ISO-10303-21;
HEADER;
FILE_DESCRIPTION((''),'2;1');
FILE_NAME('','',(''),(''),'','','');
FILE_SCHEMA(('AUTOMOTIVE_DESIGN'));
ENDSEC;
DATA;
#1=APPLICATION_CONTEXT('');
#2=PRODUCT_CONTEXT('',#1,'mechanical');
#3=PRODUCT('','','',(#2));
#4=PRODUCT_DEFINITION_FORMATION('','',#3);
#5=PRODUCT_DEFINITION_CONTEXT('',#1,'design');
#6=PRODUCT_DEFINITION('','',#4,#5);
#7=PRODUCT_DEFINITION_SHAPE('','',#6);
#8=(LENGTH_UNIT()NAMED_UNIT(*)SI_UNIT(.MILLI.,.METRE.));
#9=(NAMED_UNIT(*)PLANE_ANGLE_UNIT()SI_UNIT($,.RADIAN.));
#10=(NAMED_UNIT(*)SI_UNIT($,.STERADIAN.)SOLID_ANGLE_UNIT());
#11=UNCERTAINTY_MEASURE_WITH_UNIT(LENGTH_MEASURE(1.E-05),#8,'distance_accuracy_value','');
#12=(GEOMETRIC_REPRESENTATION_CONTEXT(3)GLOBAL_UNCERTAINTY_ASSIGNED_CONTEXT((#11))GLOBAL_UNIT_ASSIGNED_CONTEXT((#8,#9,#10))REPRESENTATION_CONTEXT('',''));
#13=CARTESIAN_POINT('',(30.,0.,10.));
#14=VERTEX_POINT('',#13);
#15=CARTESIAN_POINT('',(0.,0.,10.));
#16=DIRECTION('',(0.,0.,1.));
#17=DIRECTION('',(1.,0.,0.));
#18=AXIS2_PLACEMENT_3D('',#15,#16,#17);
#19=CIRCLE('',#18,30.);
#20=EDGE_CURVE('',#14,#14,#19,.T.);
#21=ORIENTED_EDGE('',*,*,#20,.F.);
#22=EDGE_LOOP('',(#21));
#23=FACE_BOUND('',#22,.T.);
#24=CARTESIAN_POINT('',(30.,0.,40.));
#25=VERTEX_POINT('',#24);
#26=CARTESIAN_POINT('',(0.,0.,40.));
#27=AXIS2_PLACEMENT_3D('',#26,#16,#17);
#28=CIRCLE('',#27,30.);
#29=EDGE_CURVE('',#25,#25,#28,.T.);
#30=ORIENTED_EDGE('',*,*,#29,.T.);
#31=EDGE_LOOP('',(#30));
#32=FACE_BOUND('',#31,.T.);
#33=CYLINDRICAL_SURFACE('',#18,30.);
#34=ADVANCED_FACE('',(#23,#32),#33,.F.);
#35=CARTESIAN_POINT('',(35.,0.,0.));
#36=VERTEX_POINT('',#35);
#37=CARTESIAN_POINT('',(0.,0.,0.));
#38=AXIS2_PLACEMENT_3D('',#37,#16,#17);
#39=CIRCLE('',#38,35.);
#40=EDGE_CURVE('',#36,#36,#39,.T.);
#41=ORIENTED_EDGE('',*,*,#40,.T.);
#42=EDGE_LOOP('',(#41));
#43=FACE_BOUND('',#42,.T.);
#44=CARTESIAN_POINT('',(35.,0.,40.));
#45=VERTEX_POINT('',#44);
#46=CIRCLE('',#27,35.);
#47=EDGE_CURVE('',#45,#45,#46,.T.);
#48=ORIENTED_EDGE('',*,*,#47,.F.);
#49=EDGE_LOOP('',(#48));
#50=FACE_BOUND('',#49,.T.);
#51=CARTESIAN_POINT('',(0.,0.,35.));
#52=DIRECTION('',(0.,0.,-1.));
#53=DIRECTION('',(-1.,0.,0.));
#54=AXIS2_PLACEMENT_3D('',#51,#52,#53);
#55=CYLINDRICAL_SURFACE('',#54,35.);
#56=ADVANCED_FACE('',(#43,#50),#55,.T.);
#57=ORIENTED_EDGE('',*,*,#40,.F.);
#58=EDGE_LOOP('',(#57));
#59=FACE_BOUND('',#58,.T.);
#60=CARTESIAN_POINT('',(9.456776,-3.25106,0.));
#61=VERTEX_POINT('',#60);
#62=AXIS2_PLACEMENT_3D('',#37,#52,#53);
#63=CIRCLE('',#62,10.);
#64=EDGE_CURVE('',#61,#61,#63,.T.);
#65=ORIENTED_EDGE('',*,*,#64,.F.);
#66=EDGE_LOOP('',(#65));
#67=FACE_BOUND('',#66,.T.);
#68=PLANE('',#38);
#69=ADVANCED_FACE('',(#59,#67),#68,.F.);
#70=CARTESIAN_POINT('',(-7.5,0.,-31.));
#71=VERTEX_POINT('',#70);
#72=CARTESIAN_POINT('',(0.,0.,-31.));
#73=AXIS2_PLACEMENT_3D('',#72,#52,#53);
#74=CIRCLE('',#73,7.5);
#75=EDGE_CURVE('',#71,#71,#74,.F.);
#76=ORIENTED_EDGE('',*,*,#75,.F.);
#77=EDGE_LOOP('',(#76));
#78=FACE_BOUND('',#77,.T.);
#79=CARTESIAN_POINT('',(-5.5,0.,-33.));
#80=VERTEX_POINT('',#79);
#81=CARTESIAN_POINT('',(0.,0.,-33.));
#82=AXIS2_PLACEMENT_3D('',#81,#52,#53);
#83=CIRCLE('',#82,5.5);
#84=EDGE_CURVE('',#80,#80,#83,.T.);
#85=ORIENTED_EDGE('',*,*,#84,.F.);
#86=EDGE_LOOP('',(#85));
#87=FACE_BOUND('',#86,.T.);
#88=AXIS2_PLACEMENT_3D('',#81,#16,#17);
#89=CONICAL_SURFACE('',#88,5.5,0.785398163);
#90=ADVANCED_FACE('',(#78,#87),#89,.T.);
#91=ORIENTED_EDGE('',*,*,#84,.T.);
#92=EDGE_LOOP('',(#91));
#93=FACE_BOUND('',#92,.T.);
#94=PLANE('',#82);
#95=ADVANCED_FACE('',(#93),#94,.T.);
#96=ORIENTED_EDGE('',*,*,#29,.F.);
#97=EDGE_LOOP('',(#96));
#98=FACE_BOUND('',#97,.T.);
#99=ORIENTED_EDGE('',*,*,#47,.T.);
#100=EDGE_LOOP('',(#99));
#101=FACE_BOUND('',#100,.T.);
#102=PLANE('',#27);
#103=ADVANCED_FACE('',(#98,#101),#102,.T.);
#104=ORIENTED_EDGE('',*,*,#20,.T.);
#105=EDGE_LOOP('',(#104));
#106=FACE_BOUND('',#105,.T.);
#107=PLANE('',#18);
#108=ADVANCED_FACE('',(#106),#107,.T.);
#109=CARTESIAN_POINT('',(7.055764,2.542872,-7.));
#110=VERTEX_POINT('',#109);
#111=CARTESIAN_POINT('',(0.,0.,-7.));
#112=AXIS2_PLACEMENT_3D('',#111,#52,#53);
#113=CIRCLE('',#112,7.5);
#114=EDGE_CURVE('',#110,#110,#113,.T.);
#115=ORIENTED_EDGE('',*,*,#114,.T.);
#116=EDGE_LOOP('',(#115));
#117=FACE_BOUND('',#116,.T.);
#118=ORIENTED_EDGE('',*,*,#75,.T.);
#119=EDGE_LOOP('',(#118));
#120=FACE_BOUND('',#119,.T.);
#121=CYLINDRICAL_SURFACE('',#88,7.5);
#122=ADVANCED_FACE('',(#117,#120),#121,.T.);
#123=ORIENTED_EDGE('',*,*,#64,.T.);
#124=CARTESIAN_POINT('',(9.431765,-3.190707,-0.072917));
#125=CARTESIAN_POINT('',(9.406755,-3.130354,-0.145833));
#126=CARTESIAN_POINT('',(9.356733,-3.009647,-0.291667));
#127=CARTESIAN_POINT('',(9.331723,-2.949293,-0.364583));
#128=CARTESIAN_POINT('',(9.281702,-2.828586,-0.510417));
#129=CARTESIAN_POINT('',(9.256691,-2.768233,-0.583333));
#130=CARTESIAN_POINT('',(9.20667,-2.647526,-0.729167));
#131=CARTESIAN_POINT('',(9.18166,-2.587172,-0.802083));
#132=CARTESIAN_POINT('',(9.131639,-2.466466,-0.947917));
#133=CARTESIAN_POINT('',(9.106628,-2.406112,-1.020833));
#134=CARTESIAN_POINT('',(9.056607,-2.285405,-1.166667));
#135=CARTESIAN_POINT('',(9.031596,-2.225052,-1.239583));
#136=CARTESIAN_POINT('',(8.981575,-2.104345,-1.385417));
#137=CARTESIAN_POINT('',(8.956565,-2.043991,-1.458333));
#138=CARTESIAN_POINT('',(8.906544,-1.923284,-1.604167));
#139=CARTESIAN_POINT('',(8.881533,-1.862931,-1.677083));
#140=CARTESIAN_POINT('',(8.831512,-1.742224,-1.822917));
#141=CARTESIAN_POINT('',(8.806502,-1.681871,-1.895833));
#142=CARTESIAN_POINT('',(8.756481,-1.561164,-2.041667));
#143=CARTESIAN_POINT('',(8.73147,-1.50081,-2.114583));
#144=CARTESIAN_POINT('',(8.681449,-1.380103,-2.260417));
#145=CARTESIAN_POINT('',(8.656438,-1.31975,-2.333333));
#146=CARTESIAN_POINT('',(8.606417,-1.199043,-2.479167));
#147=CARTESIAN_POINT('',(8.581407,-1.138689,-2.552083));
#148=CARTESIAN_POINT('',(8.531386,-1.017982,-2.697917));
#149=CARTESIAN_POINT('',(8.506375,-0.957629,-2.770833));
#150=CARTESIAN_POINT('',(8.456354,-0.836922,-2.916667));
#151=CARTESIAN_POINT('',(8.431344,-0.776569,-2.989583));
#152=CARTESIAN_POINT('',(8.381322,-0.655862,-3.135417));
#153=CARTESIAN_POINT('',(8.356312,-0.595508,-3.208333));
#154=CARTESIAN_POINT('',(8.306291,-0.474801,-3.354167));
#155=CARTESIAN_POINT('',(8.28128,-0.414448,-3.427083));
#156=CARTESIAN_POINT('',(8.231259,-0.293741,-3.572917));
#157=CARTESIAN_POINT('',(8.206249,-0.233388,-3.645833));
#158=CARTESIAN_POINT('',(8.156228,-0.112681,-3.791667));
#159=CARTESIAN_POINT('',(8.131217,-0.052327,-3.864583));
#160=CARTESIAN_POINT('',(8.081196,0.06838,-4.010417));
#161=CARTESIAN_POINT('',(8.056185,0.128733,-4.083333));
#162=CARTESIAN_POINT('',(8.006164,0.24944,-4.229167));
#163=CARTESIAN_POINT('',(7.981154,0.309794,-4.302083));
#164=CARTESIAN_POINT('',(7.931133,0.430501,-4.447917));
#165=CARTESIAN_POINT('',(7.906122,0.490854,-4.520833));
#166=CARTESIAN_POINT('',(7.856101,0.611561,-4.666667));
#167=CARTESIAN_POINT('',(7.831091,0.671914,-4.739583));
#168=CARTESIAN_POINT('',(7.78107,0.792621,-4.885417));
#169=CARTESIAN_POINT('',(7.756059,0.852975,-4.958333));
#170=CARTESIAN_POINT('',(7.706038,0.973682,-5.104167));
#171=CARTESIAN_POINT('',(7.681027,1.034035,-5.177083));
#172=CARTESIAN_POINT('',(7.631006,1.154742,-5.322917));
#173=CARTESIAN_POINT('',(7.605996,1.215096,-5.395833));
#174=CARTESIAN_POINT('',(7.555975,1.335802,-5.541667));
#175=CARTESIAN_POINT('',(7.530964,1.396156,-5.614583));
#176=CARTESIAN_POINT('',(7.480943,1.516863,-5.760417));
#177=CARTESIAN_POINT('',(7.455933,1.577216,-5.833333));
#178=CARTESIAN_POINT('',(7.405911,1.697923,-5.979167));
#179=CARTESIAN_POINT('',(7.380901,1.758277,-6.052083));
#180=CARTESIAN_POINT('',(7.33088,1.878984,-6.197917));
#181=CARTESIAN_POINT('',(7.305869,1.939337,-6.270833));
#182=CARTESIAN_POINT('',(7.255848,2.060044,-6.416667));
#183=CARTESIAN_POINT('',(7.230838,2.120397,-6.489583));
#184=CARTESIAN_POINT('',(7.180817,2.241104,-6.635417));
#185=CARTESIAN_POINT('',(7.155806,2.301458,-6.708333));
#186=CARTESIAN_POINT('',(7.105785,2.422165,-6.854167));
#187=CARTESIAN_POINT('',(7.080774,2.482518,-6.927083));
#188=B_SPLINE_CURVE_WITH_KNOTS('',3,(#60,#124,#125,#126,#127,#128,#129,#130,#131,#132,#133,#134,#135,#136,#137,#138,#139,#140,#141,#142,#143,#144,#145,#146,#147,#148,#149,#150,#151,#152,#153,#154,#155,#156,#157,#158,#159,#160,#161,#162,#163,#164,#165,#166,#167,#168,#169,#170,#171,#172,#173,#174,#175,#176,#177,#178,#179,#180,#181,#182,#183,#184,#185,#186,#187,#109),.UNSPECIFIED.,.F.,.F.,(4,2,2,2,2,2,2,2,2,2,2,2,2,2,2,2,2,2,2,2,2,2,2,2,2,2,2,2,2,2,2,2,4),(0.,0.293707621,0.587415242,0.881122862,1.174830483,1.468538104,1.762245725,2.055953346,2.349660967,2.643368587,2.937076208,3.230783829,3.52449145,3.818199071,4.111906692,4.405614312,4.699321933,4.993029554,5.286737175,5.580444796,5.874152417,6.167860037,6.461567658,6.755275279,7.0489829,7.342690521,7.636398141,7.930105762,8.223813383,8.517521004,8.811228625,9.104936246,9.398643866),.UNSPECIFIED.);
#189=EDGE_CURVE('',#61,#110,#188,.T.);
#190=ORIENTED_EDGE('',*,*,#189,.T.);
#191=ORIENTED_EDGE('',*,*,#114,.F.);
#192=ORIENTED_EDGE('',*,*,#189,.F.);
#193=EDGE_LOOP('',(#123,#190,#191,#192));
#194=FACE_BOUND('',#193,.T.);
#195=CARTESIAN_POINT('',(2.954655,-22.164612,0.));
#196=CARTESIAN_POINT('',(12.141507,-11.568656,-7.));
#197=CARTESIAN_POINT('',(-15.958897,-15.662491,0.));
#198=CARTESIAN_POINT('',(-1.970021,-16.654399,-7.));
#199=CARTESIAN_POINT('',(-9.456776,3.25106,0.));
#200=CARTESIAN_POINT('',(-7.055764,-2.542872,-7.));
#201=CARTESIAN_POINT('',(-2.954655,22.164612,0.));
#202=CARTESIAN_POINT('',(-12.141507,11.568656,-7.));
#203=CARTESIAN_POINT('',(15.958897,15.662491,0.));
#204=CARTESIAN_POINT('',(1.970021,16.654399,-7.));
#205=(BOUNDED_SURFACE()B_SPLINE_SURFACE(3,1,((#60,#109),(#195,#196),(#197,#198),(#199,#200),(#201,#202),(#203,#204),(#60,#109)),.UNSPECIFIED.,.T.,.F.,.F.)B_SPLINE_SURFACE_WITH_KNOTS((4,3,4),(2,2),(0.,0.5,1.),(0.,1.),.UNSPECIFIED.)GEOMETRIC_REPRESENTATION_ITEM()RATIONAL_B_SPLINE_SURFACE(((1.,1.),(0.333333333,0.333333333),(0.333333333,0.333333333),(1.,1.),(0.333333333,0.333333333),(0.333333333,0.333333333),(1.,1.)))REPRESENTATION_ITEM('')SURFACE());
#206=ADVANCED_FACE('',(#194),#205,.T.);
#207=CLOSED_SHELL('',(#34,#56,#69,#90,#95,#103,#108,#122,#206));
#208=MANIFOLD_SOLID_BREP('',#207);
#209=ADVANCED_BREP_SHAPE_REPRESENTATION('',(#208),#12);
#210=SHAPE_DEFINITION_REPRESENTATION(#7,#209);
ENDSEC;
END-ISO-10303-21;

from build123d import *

# Parameters (mm, degrees)
SKETCH1_R           = 35
BOSS_EXTRUDE1_DEPTH = 35
SKETCH2_R           = 35
BOSS_EXTRUDE2_DEPTH = 5
SKETCH7_R           = 7.5
BOSS_EXTRUDE5_DEPTH = 26
CHAMFER1_SIZE       = 2
SKETCH8_R           = 18.7
CUT_EXTRUDE1_DEPTH  = 22
SKETCH11_R          = 30
CUT_EXTRUDE2_DEPTH  = 30


with BuildPart() as part:
    # Sketch1 → Boss-Extrude1 (new body)
    with BuildSketch(Plane.XY):
        Circle(SKETCH1_R)
    extrude(amount=BOSS_EXTRUDE1_DEPTH)

    # Sketch2 → Boss-Extrude2 (add)
    with BuildSketch(Plane.XY.offset(35)):
        Circle(SKETCH2_R)
    extrude(amount=BOSS_EXTRUDE2_DEPTH)

    # Loft1: read off the stored shape, not the designer's step
    # Loft1: loft between two sections, ruled curve by curve
    loft1_from = [
        Edge.make_bspline([(9.456775653, -3.251060481, 0), (2.954654692, -22.164611787, 0), (-15.958896614, -15.662490826, 0), (-9.456775653, 3.251060481, 0), (-2.954654692, 22.164611787, 0), (15.958896614, 15.662490826, 0), (9.456775653, -3.251060481, 0)], [0, 0, 0, 0, 0.5, 0.5, 0.5, 1, 1, 1, 1], 3, [1, 0.333333333, 0.333333333, 1, 0.333333333, 0.333333333, 1]),
    ]
    loft1_to = [
        Edge.make_bspline([(7.055763885, 2.542871605, -7), (12.141507096, -11.568656164, -7), (-1.970020674, -16.654399375, -7), (-7.055763885, -2.542871605, -7), (-12.141507096, 11.568656164, -7), (1.970020674, 16.654399375, -7), (7.055763885, 2.542871605, -7)], [0, 0, 0, 0, 0.5, 0.5, 0.5, 1, 1, 1, 1], 3, [1, 0.333333333, 0.333333333, 1, 0.333333333, 0.333333333, 1]),
    ]
    loft1 = Solid(Shell([*[Face.make_surface_from_curves(loft1_from[k], loft1_to[k]) for k in range(1)], Face(Wire(loft1_from)), Face(Wire(loft1_to))]))
    add(loft1)

    # Sketch7 → Boss-Extrude5 (add)
    with BuildSketch(Plane(origin=(0, 0, -7), x_dir=(-1, 0, 0), z_dir=(0, 0, -1))):
        with Locations(Location((0, 0, 0), (0, 0, 160.181022053))):
            Circle(SKETCH7_R)
    extrude(amount=BOSS_EXTRUDE5_DEPTH)

    # Chamfer1
    chamfer1_edges = [part.edges().sort_by_distance(p)[0] for p in [
        (-7.055763885, -2.542871605, -33),
    ]]
    chamfer(chamfer1_edges, length=CHAMFER1_SIZE)

    # Sketch8 → Cut-Extrude1 (cut)
    with BuildSketch(Plane.XY.offset(40)):
        Circle(SKETCH8_R)
    extrude(amount=-CUT_EXTRUDE1_DEPTH, mode=Mode.SUBTRACT)

    # Sketch11 → Cut-Extrude2 (cut)
    with BuildSketch(Plane.XY.offset(40)):
        Circle(SKETCH11_R)
    extrude(amount=-CUT_EXTRUDE2_DEPTH, mode=Mode.SUBTRACT)


solid = part.part
